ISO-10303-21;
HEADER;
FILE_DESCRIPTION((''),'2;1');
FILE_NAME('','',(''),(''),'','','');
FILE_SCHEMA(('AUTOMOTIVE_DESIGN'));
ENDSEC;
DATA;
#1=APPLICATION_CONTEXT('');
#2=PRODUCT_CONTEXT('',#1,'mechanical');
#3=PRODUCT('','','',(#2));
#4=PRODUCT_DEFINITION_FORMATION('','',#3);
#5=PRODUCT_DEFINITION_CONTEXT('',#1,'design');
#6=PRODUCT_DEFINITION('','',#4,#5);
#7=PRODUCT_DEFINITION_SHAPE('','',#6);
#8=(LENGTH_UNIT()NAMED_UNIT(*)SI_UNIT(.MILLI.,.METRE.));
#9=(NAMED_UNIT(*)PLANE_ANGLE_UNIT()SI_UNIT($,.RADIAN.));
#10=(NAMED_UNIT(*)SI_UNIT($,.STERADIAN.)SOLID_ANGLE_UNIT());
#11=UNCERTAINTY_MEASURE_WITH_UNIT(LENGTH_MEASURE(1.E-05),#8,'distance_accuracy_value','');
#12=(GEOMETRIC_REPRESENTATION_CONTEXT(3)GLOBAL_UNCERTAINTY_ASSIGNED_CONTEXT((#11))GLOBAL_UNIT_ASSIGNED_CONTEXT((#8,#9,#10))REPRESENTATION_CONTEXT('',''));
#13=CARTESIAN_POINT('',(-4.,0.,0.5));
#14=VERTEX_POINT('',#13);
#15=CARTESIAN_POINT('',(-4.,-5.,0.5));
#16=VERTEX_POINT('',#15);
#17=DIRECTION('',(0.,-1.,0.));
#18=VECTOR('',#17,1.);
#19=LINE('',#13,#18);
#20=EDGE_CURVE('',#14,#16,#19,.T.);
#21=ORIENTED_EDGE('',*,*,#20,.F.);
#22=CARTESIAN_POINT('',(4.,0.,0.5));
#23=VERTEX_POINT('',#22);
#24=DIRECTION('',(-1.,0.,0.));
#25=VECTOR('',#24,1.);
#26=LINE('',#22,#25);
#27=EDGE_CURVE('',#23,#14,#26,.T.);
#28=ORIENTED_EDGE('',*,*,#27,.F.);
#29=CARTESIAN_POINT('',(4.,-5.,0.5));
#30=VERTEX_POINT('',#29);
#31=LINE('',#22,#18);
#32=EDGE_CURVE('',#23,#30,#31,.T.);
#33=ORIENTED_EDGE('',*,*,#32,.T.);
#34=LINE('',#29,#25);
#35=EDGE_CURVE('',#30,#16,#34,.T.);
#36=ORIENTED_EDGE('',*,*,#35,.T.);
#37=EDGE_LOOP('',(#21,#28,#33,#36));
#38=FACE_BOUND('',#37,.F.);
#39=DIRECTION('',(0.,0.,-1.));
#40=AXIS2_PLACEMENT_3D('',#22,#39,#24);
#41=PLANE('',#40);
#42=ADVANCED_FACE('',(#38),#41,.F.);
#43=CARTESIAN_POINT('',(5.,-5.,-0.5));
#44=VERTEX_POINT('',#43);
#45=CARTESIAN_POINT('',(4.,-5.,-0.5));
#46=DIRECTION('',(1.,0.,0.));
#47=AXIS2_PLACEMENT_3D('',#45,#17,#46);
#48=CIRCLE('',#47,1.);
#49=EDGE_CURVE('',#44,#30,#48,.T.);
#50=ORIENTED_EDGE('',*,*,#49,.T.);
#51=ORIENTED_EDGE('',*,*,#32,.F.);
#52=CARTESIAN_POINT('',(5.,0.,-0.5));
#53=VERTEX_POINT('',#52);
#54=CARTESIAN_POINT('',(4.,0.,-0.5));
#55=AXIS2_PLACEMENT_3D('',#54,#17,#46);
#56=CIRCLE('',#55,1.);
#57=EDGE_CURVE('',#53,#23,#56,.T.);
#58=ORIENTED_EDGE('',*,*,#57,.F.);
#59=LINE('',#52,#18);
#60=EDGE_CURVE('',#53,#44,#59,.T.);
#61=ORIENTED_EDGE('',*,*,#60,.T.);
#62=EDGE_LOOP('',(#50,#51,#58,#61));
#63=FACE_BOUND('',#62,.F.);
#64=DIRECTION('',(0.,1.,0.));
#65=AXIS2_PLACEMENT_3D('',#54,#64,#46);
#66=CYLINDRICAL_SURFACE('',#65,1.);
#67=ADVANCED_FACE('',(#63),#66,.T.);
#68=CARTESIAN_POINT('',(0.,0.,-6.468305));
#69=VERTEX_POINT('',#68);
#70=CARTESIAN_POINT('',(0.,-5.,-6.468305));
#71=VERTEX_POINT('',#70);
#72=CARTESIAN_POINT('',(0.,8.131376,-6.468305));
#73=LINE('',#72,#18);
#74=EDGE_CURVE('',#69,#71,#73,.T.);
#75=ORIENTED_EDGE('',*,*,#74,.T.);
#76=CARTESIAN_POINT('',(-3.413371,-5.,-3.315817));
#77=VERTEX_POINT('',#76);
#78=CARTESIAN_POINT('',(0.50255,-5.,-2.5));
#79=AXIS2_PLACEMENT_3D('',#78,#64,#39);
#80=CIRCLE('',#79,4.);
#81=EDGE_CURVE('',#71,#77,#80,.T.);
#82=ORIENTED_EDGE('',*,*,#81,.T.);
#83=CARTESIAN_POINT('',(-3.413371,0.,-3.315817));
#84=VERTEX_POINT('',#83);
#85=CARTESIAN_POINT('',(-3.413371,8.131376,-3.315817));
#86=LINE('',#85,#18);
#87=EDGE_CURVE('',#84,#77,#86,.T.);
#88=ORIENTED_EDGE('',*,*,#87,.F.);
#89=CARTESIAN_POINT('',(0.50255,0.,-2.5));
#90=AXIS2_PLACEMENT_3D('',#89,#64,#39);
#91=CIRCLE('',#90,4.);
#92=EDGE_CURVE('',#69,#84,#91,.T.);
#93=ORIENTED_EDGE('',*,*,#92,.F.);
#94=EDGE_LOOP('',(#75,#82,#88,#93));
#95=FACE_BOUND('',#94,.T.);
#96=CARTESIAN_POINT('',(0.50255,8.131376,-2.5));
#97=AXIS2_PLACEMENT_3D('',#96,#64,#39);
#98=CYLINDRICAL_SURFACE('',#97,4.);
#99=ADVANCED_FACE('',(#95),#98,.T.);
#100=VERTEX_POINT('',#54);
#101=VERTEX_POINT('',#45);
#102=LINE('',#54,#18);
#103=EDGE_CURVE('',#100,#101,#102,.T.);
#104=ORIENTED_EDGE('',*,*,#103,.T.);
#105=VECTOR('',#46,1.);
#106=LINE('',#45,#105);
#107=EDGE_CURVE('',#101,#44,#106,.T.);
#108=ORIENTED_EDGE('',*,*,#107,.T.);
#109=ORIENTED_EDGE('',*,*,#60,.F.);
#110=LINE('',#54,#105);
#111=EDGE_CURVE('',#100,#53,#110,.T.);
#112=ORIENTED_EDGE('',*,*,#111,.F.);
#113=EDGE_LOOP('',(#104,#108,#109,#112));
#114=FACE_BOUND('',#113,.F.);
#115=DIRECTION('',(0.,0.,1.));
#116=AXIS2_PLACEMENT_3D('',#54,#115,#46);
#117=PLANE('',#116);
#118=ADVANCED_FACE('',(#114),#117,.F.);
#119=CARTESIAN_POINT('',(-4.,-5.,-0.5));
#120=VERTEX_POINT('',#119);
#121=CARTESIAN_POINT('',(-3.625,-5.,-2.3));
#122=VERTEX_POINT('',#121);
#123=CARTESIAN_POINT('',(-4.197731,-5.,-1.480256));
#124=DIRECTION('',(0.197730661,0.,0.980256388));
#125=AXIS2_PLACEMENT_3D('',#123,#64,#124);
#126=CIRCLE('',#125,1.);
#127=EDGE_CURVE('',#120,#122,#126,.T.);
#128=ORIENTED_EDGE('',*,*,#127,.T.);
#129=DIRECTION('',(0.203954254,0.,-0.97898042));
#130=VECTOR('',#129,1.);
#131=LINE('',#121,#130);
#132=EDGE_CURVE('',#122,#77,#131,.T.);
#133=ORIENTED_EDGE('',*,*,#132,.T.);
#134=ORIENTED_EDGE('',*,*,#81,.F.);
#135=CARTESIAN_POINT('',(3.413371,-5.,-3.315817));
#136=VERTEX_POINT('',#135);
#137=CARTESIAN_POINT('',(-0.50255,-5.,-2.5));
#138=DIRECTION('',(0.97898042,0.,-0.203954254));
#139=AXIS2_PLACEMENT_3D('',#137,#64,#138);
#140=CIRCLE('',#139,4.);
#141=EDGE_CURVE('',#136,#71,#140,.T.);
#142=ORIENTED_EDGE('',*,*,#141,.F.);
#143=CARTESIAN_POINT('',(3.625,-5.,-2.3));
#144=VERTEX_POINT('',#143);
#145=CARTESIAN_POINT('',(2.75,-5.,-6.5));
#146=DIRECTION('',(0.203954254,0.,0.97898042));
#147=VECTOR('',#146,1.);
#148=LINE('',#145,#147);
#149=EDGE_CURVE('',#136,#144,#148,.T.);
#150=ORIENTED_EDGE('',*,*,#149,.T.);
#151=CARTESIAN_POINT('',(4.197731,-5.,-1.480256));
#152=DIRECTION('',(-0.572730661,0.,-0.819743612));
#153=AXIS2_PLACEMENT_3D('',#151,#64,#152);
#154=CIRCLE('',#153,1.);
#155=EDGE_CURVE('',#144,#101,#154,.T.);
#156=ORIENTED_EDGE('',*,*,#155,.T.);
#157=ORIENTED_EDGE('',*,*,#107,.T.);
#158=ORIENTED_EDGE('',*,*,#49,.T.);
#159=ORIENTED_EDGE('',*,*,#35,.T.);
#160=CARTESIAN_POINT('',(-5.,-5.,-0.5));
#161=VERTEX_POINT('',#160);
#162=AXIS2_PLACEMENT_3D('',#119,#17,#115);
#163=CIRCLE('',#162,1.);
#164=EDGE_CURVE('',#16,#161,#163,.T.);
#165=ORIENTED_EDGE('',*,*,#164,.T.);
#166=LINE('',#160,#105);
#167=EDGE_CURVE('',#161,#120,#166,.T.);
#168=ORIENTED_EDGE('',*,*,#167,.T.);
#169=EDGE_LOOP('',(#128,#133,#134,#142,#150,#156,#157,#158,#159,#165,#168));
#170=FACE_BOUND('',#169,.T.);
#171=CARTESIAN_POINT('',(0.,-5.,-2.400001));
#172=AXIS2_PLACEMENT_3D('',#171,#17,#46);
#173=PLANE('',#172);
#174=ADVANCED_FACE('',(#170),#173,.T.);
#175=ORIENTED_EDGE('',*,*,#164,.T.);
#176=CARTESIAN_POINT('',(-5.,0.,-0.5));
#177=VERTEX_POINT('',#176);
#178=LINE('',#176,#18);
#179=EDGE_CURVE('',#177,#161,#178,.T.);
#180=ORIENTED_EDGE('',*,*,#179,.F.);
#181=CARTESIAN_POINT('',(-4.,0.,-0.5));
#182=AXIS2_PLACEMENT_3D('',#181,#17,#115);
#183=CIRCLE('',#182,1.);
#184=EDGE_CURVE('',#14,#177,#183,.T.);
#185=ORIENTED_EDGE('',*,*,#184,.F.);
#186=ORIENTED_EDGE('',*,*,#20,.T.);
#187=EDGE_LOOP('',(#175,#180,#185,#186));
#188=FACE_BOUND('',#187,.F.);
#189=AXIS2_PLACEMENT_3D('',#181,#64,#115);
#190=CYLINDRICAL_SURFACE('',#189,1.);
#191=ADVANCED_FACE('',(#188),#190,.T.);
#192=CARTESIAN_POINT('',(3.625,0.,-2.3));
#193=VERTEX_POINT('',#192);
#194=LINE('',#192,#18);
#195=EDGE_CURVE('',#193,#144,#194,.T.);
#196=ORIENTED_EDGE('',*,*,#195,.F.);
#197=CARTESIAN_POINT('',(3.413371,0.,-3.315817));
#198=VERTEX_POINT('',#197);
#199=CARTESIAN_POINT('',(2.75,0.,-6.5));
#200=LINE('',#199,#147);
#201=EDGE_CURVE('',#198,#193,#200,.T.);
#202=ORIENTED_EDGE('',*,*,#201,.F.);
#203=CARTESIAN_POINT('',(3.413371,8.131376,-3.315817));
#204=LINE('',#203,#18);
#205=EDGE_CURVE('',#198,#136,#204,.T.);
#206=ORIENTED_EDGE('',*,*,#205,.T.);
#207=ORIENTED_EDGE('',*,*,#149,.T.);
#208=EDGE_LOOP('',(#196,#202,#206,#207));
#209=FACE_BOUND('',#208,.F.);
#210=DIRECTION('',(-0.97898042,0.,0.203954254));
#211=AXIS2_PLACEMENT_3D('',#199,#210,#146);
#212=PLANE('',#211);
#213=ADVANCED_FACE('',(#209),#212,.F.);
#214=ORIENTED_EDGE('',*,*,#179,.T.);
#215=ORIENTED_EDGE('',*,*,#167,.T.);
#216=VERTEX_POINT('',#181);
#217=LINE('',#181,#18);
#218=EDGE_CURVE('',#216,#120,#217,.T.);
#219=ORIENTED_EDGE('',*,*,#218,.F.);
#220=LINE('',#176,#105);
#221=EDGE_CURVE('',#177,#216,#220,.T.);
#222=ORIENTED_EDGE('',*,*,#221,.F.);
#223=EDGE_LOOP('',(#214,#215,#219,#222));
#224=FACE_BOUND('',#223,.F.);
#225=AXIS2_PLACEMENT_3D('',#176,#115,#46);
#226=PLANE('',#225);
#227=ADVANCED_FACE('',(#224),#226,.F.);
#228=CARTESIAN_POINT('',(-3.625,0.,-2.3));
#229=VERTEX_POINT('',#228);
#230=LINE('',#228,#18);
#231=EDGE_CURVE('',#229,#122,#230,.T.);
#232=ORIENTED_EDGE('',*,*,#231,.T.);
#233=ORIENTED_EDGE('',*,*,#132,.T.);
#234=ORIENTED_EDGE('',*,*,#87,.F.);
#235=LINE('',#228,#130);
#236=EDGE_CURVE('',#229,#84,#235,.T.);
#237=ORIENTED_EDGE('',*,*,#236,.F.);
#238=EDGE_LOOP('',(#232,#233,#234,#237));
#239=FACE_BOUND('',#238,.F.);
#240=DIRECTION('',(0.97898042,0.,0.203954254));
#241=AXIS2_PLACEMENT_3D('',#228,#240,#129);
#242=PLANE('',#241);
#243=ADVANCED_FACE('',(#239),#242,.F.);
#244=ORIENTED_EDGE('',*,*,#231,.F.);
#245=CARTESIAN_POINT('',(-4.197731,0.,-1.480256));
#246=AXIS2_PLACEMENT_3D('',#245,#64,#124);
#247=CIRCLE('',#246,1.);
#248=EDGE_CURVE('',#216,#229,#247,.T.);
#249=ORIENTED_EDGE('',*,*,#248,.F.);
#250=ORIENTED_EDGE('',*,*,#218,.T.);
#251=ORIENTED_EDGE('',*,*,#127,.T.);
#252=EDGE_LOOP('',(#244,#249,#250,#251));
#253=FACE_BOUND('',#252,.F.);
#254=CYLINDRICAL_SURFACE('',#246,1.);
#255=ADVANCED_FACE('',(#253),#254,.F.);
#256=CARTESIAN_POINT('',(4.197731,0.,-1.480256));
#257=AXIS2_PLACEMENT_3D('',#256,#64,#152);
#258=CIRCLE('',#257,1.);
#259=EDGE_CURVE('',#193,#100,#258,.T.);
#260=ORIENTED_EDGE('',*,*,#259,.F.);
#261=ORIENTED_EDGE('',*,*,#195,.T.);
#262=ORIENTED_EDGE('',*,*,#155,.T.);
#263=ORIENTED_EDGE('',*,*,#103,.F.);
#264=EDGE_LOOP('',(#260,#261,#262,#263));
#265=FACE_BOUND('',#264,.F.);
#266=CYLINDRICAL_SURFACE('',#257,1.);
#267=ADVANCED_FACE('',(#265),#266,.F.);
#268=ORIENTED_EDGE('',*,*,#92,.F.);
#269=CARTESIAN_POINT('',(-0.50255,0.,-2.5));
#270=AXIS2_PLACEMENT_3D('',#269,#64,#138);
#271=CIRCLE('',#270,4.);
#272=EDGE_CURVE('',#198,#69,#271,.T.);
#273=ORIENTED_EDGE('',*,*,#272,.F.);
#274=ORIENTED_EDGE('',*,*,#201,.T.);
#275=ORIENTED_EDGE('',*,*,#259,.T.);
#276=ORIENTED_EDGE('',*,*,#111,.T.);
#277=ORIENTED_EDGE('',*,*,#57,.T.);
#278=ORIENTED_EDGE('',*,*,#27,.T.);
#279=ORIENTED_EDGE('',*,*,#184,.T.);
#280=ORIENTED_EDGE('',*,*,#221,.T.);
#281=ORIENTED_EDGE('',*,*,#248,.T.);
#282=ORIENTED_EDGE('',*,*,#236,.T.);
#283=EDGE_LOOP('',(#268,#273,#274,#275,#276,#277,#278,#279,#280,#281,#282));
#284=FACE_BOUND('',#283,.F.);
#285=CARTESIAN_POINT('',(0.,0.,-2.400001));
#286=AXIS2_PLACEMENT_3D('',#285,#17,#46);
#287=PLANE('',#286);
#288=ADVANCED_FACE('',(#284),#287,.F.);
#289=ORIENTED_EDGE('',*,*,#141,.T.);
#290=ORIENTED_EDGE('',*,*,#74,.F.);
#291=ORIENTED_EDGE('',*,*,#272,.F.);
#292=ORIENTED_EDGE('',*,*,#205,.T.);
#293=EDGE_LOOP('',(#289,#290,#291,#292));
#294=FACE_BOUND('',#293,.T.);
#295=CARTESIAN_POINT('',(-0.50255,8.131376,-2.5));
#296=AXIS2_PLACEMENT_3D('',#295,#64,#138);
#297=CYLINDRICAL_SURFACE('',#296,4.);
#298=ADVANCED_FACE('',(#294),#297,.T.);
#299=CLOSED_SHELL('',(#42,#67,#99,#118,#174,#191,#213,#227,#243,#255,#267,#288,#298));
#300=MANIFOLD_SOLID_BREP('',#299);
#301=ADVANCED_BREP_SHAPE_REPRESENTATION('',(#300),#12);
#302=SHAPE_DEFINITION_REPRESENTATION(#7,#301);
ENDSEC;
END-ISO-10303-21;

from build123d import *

# Parameters (mm, degrees)
F1_DEPTH    = 5
F2_T1_DEPTH = 21.2627511202


# Not quite as in the source:
# - a fillet or chamfer that OpenCascade refuses, or shapes differently, is made with other operations: its cross-section is extruded or revolved along the edge and cut away or added


with BuildPart() as f1:
    # F0 (on Front) → F1 (new body)
    with BuildSketch(Plane.XZ):
        with BuildLine():
            Line((4, -0.5), (5, -0.5))
            ThreePointArc((5, -0.5), (4.7071067812, 0.2071067812), (4, 0.5))
            Line((4, 0.5), (-4, 0.5))
            ThreePointArc((-4, 0.5), (-4.7071067812, 0.2071067812), (-5, -0.5))
            Line((-5, -0.5), (-4, -0.5))
            ThreePointArc((-4, -0.5), (-3.2187502413, -1.2763021336), (-3.625, -2.3))
            Line((-3.625, -2.3), (-2.75, -6.5))
            Line((-2.75, -6.5), (0, -6.5))
            Line((0, -6.5), (2.75, -6.5))
            Line((2.75, -6.5), (3.625, -2.3))
            ThreePointArc((3.625, -2.3), (3.2187502413, -1.2763021336), (4, -0.5))
        make_face()
    extrude(amount=F1_DEPTH)

    # F2: fillet of radius 4 on 2 edges, made by hand

    # F2_s2 → F2_t1 (cut)
    with BuildSketch(Plane.XZ.offset(-8.1313755601)):
        with BuildLine():
            ThreePointArc((0.502550224, -6.5), (-2.0210119343, -5.6034873985), (-3.4133714549, -3.3158170164))
            Line((-3.4133714549, -3.3158170164), (-2.75, -6.5))
            Line((-2.75, -6.5), (0.502550224, -6.5))
        make_face()
        with BuildLine():
            ThreePointArc((3.4133714549, -3.3158170164), (2.0210119343, -5.6034873985), (-0.502550224, -6.5))
            Line((-0.502550224, -6.5), (2.75, -6.5))
            Line((2.75, -6.5), (3.4133714549, -3.3158170164))
        make_face()
    extrude(amount=F2_T1_DEPTH, mode=Mode.SUBTRACT)


solid = f1.part
